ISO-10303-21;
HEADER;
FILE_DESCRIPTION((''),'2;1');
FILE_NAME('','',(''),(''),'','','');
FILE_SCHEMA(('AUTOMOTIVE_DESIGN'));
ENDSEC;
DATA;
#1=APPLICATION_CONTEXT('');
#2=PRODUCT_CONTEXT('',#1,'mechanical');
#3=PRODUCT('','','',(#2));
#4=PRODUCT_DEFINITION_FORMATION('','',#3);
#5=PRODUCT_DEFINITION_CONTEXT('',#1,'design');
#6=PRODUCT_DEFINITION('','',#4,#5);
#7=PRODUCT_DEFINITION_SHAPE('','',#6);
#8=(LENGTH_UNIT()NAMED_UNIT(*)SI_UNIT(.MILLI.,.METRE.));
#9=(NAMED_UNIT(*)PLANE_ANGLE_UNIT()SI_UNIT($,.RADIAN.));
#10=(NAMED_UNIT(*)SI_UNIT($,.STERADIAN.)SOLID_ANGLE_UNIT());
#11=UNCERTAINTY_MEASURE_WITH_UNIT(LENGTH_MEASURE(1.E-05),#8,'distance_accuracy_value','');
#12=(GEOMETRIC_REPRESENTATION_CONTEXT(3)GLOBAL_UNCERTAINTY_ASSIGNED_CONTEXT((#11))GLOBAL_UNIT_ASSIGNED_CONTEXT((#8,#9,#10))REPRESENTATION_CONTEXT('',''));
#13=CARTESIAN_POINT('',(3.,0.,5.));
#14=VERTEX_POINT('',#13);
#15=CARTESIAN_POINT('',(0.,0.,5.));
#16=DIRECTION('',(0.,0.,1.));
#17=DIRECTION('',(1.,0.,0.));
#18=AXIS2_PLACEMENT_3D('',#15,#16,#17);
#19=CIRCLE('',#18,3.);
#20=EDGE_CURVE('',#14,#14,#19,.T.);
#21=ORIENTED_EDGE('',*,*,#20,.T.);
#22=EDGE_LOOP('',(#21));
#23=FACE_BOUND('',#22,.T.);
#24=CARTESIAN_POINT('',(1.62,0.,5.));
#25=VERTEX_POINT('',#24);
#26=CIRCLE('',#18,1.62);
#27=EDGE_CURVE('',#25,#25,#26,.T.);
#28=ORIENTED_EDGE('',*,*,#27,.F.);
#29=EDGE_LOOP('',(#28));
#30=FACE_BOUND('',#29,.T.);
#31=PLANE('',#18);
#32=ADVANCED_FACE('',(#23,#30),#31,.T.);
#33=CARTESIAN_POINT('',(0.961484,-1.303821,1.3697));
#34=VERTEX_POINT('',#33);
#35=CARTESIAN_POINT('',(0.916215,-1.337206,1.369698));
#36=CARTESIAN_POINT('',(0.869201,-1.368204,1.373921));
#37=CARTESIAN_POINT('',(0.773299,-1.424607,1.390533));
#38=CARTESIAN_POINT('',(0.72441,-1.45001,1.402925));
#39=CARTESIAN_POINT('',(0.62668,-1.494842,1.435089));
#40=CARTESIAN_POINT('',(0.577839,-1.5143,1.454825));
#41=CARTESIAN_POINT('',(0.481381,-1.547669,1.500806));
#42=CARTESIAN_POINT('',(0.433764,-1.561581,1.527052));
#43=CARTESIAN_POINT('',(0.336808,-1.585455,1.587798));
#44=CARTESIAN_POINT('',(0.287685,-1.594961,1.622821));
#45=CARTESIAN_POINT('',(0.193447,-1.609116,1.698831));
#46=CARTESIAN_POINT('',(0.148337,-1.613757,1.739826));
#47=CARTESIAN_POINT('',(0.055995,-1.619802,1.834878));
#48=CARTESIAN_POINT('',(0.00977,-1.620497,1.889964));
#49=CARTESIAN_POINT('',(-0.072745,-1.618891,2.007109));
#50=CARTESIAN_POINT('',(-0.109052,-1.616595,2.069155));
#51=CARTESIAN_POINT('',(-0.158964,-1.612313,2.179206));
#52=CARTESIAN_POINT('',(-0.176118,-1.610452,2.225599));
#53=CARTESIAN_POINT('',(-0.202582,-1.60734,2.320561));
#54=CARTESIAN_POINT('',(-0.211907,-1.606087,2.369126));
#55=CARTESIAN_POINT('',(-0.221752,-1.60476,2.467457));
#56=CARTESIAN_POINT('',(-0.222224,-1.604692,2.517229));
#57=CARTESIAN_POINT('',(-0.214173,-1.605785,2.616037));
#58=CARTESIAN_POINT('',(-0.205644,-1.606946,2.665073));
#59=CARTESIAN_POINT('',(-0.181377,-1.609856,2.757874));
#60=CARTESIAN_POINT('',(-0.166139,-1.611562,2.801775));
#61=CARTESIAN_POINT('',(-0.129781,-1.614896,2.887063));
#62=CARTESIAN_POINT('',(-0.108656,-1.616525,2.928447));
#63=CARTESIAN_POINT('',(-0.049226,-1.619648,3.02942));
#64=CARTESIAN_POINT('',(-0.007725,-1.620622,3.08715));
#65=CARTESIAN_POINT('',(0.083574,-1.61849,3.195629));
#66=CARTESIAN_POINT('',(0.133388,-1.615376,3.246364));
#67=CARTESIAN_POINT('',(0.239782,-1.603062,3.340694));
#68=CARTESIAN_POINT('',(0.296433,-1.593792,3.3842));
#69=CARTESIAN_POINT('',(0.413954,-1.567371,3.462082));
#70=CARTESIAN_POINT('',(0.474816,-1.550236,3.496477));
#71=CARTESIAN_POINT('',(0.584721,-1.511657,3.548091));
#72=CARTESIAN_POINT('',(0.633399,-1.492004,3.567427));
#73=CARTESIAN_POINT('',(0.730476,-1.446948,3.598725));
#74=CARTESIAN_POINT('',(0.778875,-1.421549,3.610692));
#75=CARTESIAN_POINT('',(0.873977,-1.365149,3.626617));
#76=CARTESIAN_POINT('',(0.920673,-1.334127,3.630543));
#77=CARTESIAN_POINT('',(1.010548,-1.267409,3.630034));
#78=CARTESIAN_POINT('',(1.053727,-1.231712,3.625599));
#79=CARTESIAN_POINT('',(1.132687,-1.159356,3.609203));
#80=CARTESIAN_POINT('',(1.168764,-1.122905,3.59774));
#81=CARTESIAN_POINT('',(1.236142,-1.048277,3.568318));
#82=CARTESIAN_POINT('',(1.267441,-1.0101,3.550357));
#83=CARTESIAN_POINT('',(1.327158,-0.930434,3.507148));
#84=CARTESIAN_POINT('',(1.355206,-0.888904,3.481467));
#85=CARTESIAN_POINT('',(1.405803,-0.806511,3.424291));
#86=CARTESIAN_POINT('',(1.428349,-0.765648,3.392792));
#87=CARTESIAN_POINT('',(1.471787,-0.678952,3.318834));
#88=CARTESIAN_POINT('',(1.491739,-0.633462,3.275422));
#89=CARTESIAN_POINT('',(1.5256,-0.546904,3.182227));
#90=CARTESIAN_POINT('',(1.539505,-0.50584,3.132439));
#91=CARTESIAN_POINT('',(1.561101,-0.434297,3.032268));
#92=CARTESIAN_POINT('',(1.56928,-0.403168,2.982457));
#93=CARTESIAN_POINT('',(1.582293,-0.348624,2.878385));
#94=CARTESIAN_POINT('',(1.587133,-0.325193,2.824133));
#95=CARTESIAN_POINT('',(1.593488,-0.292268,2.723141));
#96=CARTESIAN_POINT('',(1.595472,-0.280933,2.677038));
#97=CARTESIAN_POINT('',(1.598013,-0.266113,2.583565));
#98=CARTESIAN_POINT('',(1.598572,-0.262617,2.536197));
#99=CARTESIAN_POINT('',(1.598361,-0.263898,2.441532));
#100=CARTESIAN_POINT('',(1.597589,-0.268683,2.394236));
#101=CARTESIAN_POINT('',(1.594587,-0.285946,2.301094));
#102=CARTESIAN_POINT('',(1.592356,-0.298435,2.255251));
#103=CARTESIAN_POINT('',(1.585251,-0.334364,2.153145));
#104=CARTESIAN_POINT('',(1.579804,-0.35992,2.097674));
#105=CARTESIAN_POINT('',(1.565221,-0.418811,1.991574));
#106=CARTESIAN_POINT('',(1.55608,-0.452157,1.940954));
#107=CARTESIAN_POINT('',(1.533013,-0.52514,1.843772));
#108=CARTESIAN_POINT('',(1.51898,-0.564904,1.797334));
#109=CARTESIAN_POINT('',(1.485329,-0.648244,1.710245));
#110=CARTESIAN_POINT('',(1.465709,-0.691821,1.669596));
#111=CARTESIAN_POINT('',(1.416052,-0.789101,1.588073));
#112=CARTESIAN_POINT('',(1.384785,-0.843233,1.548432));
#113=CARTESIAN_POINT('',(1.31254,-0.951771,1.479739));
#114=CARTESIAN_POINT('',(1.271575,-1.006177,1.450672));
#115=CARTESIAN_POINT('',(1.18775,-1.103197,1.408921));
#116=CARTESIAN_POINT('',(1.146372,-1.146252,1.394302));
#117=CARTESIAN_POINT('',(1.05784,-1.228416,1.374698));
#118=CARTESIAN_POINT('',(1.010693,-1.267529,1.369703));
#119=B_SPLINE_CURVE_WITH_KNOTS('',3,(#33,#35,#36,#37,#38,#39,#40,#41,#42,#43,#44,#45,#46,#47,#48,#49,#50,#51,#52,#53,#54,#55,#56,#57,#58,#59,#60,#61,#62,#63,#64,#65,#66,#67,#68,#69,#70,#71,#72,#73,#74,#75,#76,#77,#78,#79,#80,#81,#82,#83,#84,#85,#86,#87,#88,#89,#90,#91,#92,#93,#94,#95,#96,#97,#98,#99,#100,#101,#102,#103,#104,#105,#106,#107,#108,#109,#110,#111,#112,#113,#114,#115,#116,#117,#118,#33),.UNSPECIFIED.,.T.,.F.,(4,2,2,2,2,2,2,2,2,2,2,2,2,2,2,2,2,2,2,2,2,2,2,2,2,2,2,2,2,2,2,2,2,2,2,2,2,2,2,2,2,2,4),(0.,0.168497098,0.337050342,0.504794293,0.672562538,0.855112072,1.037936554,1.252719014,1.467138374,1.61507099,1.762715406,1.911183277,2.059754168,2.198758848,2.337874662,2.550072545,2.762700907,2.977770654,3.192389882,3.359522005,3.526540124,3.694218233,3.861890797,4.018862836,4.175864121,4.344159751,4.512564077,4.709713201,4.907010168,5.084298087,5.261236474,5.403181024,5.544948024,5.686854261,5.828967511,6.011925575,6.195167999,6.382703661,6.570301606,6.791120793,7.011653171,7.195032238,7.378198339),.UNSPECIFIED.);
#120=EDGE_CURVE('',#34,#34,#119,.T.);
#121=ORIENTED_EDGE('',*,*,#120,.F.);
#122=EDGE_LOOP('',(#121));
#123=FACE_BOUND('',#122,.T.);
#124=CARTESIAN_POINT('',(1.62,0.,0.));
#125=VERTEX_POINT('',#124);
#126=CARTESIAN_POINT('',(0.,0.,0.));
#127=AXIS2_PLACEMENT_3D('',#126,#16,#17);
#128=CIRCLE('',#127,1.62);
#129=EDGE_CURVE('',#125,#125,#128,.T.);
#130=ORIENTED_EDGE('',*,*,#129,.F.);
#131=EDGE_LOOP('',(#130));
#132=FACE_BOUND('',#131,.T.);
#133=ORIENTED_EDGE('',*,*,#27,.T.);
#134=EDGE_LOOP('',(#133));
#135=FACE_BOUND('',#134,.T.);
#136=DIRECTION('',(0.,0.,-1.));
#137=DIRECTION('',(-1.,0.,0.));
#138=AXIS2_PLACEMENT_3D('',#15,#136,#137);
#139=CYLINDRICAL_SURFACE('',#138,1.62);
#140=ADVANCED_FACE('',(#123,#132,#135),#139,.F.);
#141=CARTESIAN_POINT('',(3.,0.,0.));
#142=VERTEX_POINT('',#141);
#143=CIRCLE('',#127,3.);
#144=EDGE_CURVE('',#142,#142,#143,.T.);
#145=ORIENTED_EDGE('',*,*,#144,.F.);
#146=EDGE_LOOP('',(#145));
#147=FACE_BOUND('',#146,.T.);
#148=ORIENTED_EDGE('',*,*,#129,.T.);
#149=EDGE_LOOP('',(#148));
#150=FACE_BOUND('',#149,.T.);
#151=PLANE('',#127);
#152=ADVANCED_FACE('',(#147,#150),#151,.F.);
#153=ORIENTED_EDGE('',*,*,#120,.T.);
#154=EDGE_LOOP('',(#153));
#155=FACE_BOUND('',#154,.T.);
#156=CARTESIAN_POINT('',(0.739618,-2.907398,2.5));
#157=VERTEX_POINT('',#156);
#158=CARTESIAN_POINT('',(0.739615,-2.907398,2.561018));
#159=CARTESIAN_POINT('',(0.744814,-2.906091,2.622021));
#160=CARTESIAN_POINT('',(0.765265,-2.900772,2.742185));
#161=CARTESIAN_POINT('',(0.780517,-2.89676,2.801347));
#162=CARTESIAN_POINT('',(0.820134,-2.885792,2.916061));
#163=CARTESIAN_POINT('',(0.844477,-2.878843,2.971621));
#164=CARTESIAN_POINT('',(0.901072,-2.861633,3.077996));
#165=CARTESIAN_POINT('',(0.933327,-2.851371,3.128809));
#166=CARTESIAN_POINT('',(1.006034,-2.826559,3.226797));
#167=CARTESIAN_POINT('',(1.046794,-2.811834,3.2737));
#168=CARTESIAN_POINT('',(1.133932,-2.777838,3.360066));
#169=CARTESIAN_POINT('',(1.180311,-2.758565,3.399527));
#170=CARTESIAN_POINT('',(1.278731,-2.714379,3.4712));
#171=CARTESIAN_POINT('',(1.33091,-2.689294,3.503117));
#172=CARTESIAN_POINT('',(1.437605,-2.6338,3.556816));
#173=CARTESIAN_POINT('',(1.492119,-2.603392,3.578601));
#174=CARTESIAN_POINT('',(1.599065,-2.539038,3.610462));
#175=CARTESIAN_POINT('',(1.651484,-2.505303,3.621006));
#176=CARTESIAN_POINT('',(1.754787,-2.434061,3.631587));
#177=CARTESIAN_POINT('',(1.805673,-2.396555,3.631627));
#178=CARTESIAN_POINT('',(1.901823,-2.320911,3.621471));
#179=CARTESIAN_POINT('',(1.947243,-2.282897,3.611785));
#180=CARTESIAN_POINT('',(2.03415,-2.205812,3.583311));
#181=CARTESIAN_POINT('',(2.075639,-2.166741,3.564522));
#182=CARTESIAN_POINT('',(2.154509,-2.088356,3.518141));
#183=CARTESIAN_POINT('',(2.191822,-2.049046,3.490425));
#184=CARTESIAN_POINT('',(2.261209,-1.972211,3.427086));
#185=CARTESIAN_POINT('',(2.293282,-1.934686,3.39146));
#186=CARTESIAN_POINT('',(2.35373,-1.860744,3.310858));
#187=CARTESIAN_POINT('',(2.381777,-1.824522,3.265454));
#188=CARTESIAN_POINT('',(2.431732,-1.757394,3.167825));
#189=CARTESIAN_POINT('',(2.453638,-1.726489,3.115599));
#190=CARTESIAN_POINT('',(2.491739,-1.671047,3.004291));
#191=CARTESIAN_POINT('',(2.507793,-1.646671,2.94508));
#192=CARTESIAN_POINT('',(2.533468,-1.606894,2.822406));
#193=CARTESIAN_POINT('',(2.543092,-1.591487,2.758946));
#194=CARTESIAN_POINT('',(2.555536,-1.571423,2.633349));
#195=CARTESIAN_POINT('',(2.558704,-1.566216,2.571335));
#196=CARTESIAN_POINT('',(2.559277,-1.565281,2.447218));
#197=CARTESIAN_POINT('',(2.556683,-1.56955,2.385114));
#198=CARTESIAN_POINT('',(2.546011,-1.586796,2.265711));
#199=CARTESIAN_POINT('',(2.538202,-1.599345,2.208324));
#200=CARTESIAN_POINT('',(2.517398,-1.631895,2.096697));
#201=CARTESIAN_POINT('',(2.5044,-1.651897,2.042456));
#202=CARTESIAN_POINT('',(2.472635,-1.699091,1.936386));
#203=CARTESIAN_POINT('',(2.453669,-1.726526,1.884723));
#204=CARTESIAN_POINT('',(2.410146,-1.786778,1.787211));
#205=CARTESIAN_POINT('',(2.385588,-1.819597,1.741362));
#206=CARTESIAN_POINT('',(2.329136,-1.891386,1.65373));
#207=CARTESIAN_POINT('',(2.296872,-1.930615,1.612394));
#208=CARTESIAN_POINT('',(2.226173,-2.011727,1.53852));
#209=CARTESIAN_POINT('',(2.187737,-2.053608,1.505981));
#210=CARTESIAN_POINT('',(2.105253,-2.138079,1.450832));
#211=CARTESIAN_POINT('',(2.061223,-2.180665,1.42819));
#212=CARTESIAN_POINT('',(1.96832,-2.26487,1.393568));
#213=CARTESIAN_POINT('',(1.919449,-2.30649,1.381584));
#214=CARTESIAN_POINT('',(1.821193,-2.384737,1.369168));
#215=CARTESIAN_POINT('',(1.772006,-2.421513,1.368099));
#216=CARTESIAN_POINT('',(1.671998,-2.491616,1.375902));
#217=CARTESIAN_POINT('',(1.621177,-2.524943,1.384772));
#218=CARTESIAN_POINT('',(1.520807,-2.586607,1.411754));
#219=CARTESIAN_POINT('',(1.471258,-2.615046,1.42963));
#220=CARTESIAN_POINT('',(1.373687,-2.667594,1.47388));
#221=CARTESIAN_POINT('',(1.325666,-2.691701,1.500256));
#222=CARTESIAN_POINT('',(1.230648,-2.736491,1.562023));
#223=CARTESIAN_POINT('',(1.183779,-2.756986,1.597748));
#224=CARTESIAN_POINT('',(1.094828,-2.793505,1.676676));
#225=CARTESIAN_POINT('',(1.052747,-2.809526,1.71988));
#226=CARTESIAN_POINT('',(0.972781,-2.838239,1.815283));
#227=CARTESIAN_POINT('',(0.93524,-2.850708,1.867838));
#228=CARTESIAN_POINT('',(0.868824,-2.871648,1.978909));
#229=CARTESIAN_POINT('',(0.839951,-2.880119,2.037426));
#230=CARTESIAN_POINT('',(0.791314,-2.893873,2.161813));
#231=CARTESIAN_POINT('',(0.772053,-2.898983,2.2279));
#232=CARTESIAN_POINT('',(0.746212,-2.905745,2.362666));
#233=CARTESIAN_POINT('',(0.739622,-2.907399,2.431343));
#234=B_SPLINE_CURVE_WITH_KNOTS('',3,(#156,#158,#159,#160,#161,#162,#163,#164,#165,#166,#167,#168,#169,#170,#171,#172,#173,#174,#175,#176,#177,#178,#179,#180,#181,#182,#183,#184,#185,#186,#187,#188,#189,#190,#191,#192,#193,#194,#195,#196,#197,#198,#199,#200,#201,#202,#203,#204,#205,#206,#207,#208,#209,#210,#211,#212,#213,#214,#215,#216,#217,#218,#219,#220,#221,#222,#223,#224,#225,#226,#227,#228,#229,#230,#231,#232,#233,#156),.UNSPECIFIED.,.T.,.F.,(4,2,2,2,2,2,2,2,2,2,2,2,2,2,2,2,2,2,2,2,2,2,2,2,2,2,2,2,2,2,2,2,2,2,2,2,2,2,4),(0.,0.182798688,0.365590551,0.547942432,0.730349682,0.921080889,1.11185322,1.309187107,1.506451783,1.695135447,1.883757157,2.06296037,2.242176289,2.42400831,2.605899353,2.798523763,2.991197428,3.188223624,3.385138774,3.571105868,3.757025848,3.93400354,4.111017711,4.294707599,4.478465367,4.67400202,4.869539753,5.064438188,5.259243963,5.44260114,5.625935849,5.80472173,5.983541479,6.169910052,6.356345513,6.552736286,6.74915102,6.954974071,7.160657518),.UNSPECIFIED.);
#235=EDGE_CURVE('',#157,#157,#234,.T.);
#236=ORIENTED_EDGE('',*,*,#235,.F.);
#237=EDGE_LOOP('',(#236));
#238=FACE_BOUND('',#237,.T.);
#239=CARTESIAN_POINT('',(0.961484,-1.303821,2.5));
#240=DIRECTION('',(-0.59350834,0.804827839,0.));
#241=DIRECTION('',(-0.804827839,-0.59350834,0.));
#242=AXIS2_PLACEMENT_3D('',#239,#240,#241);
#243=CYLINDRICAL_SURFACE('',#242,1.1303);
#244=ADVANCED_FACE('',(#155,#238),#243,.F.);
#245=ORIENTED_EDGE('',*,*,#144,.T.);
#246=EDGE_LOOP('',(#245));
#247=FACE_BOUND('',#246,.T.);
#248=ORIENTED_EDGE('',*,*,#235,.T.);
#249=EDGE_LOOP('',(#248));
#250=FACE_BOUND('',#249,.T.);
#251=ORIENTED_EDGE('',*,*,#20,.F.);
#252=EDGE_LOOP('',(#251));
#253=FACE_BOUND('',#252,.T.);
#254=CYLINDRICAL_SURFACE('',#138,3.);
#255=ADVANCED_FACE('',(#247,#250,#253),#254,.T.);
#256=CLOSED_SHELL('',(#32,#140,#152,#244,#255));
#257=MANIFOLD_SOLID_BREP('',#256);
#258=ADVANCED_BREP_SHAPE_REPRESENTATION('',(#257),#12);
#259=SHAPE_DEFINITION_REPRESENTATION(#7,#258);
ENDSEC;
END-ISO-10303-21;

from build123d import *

# Parameters (mm, degrees)
SKETCH1_R                     = 3
SKETCH1_R_2                   = 1.62
EXTRUDE1_DEPTH                = 5
F_4_40_TAPPED_HOLE1_OUTLINE_W = 1.1303
F_4_40_TAPPED_HOLE1_OUTLINE_H = 1.839757257


# Read off the part's stored shape, not the designer's step: #4-40 Tapped Hole1
with BuildPart() as part:
    # Sketch1 → Extrude1 (new body)
    with BuildSketch(Plane.XY):
        Circle(SKETCH1_R)
        Circle(SKETCH1_R_2, mode=Mode.SUBTRACT)
    extrude(amount=EXTRUDE1_DEPTH)

    # #4-40 Tapped Hole1 outline → #4-40 Tapped Hole1 (revolve, cut)
    with BuildSketch(Plane(origin=(0, 0, 2.5), x_dir=(0.8048278392446406, 0.5935083396017303, 0), z_dir=(0, 0, -1))):
        with Locations((0.56515, 2.080149877)):
            Rectangle(F_4_40_TAPPED_HOLE1_OUTLINE_W, F_4_40_TAPPED_HOLE1_OUTLINE_H)
    revolve(axis=Axis((0, 0, 2.5), (0.5935083396017303, -0.8048278392446406, 0)), mode=Mode.SUBTRACT)


solid = part.part
